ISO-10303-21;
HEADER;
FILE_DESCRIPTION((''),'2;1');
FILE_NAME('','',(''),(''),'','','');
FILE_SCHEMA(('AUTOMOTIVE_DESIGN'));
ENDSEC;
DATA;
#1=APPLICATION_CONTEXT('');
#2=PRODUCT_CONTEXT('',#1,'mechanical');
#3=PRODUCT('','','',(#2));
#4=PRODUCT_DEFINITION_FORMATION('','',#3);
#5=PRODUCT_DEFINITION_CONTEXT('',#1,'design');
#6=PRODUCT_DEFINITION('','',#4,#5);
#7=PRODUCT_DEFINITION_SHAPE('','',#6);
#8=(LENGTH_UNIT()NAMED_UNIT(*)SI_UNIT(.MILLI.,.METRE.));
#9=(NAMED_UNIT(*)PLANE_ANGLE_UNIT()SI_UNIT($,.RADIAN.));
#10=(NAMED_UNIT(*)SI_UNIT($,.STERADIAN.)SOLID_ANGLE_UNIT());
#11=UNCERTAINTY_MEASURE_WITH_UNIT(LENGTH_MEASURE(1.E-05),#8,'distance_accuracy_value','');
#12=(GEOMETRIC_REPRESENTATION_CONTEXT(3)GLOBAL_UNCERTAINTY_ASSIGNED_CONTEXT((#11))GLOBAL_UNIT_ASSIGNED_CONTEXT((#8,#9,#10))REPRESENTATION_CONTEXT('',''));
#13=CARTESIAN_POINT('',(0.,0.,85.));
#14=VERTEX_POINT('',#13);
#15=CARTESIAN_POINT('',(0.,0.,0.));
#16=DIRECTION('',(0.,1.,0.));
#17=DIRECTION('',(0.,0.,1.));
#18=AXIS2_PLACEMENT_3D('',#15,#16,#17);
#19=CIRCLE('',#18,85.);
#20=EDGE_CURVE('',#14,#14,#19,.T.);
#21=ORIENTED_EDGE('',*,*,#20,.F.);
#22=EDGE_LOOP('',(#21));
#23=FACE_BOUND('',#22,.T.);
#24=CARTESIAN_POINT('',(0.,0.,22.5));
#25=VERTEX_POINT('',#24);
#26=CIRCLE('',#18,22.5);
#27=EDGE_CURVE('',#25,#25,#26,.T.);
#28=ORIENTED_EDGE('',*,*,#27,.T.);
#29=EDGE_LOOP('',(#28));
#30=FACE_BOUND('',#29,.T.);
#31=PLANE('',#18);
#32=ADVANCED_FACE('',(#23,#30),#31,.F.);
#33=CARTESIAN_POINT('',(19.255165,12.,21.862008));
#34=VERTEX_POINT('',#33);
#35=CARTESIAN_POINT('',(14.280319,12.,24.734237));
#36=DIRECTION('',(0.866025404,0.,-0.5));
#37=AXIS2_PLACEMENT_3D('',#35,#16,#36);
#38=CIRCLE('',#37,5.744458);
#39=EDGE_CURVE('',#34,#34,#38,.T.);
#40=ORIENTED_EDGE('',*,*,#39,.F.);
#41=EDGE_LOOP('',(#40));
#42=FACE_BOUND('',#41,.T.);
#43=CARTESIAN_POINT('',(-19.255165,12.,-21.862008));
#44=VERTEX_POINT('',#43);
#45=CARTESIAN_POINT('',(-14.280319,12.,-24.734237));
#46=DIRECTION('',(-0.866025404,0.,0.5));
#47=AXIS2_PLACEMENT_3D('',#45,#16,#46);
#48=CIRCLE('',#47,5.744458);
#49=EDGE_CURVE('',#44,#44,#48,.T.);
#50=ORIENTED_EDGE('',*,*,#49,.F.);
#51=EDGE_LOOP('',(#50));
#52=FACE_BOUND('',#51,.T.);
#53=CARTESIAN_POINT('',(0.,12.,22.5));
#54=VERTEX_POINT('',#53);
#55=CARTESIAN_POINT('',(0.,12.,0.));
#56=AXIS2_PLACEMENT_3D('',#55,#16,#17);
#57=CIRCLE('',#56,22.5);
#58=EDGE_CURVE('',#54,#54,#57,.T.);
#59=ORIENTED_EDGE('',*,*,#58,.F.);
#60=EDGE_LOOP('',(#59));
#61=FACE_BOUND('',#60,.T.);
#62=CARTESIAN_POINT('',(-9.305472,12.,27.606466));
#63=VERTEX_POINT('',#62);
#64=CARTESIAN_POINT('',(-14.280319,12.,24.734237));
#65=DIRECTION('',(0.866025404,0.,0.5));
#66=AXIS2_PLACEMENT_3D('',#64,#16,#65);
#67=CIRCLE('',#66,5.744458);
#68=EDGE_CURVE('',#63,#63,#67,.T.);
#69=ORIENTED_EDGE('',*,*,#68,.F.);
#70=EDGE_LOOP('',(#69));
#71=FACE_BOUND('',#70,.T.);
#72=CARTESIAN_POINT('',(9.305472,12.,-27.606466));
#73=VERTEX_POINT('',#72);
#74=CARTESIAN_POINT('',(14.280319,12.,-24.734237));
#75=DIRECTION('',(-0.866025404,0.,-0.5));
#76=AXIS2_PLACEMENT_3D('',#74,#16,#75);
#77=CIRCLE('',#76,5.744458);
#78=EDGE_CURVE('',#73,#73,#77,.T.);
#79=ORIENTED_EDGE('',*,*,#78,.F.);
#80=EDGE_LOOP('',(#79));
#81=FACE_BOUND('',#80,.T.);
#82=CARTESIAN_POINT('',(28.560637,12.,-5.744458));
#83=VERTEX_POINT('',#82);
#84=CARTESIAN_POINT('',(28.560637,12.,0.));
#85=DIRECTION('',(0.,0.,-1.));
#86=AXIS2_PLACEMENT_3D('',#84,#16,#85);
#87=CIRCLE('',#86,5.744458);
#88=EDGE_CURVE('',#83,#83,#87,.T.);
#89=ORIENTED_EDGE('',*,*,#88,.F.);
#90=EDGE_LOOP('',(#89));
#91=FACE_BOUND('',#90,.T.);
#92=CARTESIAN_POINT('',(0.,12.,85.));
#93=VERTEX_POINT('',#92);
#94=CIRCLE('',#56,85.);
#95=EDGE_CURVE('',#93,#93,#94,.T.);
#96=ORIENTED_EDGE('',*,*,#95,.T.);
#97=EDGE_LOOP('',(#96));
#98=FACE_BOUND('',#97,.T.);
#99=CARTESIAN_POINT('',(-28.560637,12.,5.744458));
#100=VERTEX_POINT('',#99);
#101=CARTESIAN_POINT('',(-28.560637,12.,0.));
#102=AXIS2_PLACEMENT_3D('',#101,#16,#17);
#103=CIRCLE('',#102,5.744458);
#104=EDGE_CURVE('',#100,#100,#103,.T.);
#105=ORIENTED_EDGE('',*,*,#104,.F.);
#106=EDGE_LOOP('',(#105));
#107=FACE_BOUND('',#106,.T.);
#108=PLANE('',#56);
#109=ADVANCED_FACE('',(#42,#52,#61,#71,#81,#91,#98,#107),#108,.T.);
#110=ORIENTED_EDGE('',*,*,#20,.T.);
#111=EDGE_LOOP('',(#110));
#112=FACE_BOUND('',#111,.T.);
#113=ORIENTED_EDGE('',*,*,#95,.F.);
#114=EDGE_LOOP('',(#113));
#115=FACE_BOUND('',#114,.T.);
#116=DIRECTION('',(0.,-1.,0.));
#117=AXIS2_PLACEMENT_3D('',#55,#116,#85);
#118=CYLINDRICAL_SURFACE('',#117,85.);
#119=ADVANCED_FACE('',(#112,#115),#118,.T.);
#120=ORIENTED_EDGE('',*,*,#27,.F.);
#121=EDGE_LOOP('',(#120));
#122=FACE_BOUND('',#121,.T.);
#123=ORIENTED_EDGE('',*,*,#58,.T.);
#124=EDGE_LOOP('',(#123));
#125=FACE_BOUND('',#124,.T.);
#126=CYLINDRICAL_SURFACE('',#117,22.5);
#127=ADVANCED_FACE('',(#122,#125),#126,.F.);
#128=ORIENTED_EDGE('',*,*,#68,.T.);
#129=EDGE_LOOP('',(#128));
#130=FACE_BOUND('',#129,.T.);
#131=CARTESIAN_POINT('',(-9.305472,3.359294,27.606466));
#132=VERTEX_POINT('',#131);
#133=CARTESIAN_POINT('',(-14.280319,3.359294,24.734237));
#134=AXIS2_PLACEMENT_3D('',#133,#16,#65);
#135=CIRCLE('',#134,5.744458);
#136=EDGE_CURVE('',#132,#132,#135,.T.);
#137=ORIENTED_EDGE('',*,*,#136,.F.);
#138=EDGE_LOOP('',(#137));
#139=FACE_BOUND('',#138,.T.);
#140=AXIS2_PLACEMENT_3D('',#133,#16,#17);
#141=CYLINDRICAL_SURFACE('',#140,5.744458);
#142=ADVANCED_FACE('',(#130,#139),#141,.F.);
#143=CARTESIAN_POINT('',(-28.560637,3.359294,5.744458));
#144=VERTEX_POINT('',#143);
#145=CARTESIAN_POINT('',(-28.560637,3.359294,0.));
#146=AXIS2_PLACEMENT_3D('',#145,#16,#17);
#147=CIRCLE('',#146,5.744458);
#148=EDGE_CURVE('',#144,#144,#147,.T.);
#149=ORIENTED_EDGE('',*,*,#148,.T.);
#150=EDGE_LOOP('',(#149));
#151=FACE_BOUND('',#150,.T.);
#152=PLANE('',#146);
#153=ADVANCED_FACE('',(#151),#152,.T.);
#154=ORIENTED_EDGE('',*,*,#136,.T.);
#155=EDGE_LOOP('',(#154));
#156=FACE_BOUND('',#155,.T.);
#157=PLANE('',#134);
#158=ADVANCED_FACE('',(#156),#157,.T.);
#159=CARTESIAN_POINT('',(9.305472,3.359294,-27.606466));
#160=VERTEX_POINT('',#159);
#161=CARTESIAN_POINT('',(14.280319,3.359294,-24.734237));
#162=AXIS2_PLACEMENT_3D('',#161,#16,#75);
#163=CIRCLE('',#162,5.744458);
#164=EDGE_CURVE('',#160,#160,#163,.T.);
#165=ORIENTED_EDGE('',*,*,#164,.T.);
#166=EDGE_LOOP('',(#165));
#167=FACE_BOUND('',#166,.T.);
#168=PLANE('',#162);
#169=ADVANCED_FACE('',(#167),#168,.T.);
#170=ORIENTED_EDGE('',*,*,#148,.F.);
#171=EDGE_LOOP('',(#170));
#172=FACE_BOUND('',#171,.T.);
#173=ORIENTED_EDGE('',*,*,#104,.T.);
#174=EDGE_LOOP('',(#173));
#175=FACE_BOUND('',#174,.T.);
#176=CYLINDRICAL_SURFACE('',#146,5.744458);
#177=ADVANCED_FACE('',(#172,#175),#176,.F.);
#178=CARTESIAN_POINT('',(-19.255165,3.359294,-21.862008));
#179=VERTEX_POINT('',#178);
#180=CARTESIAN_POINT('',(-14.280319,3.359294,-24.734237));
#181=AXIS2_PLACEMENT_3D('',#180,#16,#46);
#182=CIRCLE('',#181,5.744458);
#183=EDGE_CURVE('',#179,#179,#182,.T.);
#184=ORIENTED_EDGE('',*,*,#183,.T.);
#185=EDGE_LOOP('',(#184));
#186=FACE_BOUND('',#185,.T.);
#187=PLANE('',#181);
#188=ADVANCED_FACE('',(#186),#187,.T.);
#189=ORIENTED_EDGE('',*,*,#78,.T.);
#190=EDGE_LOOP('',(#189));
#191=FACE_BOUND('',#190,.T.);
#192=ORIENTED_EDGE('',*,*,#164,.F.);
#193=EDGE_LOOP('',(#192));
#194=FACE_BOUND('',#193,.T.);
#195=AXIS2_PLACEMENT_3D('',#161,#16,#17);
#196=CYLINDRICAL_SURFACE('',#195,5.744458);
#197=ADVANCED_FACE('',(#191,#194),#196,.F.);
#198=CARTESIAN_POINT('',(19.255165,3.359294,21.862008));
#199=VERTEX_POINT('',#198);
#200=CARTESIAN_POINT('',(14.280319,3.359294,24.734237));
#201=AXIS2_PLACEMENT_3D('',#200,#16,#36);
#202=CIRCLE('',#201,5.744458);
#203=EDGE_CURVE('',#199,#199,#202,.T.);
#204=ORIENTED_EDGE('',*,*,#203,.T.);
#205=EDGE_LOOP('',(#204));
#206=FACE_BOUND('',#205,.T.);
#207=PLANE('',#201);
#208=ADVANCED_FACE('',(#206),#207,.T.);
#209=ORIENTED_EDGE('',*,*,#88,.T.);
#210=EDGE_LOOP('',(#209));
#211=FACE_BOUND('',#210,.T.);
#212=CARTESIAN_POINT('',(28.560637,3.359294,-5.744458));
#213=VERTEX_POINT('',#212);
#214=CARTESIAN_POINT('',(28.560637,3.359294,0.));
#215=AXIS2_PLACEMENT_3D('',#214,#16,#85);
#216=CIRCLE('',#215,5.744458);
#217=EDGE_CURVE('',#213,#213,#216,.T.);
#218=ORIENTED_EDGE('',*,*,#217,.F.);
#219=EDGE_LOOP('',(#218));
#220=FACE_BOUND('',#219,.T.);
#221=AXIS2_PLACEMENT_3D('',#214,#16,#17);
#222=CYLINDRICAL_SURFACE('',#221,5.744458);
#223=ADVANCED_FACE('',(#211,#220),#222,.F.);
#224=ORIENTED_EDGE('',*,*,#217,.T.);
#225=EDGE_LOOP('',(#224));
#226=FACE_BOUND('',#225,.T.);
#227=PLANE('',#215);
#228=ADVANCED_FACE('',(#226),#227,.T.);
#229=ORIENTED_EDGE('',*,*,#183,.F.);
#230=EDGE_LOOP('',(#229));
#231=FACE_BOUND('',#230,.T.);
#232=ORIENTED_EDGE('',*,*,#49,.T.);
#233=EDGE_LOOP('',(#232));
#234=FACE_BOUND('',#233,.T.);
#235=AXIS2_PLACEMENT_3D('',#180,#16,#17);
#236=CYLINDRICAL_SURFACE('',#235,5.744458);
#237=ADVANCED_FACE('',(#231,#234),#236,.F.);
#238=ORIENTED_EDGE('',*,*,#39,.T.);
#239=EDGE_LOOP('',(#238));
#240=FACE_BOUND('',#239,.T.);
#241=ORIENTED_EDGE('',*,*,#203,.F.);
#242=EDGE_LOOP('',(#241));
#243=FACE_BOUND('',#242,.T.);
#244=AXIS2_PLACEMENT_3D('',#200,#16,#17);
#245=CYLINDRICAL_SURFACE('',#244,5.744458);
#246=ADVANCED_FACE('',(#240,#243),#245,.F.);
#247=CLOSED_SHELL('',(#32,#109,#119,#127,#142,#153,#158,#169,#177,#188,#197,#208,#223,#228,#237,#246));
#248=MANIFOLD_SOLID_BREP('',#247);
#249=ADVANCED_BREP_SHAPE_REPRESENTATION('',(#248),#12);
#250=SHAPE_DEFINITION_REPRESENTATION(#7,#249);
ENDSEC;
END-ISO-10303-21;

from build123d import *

# Parameters (mm, degrees)
SKETCH1_R           = 85
BOSS_EXTRUDE1_DEPTH = 12
SKETCH2_R           = 22.5
CUT_EXTRUDE1_DEPTH  = 121.805629008
SKETCH3_R           = 5.744458378
CUT_EXTRUDE2_DEPTH  = 8.640705881
CIRPATTERN1_COUNT   = 6


with BuildPart() as part:
    # Sketch1 → Boss-Extrude1 (new body)
    with BuildSketch(Plane(origin=(0, 0, 0), x_dir=(1, 0, 0), z_dir=(0, 1, 0))):
        Circle(SKETCH1_R)
    extrude(amount=BOSS_EXTRUDE1_DEPTH)

    # Sketch2 → Cut-Extrude1 (cut, through all)
    with BuildSketch(Plane(origin=(0, 0, 0), x_dir=(1, 0, 0), z_dir=(0, 1, 0))):
        Circle(SKETCH2_R)
    extrude(amount=CUT_EXTRUDE1_DEPTH, mode=Mode.SUBTRACT)

    # Sketch3 → Cut-Extrude2 (cut)
    with BuildSketch(Plane(origin=(0, 12, 0), x_dir=(1, 0, 0), z_dir=(0, 1, 0))):
        with Locations((-28.560637046, 0)):
            Circle(SKETCH3_R)
    cut_extrude2 = extrude(amount=-CUT_EXTRUDE2_DEPTH, mode=Mode.SUBTRACT)

    # CirPattern1: Cut-Extrude2 ×6 about axis
    cirpattern1_axis = Axis((0, 0, 0), (0, 1, 0))
    for i in range(1, CIRPATTERN1_COUNT):
        add(cut_extrude2.rotate(cirpattern1_axis, i * 360 / CIRPATTERN1_COUNT), mode=Mode.SUBTRACT)


solid = part.part
